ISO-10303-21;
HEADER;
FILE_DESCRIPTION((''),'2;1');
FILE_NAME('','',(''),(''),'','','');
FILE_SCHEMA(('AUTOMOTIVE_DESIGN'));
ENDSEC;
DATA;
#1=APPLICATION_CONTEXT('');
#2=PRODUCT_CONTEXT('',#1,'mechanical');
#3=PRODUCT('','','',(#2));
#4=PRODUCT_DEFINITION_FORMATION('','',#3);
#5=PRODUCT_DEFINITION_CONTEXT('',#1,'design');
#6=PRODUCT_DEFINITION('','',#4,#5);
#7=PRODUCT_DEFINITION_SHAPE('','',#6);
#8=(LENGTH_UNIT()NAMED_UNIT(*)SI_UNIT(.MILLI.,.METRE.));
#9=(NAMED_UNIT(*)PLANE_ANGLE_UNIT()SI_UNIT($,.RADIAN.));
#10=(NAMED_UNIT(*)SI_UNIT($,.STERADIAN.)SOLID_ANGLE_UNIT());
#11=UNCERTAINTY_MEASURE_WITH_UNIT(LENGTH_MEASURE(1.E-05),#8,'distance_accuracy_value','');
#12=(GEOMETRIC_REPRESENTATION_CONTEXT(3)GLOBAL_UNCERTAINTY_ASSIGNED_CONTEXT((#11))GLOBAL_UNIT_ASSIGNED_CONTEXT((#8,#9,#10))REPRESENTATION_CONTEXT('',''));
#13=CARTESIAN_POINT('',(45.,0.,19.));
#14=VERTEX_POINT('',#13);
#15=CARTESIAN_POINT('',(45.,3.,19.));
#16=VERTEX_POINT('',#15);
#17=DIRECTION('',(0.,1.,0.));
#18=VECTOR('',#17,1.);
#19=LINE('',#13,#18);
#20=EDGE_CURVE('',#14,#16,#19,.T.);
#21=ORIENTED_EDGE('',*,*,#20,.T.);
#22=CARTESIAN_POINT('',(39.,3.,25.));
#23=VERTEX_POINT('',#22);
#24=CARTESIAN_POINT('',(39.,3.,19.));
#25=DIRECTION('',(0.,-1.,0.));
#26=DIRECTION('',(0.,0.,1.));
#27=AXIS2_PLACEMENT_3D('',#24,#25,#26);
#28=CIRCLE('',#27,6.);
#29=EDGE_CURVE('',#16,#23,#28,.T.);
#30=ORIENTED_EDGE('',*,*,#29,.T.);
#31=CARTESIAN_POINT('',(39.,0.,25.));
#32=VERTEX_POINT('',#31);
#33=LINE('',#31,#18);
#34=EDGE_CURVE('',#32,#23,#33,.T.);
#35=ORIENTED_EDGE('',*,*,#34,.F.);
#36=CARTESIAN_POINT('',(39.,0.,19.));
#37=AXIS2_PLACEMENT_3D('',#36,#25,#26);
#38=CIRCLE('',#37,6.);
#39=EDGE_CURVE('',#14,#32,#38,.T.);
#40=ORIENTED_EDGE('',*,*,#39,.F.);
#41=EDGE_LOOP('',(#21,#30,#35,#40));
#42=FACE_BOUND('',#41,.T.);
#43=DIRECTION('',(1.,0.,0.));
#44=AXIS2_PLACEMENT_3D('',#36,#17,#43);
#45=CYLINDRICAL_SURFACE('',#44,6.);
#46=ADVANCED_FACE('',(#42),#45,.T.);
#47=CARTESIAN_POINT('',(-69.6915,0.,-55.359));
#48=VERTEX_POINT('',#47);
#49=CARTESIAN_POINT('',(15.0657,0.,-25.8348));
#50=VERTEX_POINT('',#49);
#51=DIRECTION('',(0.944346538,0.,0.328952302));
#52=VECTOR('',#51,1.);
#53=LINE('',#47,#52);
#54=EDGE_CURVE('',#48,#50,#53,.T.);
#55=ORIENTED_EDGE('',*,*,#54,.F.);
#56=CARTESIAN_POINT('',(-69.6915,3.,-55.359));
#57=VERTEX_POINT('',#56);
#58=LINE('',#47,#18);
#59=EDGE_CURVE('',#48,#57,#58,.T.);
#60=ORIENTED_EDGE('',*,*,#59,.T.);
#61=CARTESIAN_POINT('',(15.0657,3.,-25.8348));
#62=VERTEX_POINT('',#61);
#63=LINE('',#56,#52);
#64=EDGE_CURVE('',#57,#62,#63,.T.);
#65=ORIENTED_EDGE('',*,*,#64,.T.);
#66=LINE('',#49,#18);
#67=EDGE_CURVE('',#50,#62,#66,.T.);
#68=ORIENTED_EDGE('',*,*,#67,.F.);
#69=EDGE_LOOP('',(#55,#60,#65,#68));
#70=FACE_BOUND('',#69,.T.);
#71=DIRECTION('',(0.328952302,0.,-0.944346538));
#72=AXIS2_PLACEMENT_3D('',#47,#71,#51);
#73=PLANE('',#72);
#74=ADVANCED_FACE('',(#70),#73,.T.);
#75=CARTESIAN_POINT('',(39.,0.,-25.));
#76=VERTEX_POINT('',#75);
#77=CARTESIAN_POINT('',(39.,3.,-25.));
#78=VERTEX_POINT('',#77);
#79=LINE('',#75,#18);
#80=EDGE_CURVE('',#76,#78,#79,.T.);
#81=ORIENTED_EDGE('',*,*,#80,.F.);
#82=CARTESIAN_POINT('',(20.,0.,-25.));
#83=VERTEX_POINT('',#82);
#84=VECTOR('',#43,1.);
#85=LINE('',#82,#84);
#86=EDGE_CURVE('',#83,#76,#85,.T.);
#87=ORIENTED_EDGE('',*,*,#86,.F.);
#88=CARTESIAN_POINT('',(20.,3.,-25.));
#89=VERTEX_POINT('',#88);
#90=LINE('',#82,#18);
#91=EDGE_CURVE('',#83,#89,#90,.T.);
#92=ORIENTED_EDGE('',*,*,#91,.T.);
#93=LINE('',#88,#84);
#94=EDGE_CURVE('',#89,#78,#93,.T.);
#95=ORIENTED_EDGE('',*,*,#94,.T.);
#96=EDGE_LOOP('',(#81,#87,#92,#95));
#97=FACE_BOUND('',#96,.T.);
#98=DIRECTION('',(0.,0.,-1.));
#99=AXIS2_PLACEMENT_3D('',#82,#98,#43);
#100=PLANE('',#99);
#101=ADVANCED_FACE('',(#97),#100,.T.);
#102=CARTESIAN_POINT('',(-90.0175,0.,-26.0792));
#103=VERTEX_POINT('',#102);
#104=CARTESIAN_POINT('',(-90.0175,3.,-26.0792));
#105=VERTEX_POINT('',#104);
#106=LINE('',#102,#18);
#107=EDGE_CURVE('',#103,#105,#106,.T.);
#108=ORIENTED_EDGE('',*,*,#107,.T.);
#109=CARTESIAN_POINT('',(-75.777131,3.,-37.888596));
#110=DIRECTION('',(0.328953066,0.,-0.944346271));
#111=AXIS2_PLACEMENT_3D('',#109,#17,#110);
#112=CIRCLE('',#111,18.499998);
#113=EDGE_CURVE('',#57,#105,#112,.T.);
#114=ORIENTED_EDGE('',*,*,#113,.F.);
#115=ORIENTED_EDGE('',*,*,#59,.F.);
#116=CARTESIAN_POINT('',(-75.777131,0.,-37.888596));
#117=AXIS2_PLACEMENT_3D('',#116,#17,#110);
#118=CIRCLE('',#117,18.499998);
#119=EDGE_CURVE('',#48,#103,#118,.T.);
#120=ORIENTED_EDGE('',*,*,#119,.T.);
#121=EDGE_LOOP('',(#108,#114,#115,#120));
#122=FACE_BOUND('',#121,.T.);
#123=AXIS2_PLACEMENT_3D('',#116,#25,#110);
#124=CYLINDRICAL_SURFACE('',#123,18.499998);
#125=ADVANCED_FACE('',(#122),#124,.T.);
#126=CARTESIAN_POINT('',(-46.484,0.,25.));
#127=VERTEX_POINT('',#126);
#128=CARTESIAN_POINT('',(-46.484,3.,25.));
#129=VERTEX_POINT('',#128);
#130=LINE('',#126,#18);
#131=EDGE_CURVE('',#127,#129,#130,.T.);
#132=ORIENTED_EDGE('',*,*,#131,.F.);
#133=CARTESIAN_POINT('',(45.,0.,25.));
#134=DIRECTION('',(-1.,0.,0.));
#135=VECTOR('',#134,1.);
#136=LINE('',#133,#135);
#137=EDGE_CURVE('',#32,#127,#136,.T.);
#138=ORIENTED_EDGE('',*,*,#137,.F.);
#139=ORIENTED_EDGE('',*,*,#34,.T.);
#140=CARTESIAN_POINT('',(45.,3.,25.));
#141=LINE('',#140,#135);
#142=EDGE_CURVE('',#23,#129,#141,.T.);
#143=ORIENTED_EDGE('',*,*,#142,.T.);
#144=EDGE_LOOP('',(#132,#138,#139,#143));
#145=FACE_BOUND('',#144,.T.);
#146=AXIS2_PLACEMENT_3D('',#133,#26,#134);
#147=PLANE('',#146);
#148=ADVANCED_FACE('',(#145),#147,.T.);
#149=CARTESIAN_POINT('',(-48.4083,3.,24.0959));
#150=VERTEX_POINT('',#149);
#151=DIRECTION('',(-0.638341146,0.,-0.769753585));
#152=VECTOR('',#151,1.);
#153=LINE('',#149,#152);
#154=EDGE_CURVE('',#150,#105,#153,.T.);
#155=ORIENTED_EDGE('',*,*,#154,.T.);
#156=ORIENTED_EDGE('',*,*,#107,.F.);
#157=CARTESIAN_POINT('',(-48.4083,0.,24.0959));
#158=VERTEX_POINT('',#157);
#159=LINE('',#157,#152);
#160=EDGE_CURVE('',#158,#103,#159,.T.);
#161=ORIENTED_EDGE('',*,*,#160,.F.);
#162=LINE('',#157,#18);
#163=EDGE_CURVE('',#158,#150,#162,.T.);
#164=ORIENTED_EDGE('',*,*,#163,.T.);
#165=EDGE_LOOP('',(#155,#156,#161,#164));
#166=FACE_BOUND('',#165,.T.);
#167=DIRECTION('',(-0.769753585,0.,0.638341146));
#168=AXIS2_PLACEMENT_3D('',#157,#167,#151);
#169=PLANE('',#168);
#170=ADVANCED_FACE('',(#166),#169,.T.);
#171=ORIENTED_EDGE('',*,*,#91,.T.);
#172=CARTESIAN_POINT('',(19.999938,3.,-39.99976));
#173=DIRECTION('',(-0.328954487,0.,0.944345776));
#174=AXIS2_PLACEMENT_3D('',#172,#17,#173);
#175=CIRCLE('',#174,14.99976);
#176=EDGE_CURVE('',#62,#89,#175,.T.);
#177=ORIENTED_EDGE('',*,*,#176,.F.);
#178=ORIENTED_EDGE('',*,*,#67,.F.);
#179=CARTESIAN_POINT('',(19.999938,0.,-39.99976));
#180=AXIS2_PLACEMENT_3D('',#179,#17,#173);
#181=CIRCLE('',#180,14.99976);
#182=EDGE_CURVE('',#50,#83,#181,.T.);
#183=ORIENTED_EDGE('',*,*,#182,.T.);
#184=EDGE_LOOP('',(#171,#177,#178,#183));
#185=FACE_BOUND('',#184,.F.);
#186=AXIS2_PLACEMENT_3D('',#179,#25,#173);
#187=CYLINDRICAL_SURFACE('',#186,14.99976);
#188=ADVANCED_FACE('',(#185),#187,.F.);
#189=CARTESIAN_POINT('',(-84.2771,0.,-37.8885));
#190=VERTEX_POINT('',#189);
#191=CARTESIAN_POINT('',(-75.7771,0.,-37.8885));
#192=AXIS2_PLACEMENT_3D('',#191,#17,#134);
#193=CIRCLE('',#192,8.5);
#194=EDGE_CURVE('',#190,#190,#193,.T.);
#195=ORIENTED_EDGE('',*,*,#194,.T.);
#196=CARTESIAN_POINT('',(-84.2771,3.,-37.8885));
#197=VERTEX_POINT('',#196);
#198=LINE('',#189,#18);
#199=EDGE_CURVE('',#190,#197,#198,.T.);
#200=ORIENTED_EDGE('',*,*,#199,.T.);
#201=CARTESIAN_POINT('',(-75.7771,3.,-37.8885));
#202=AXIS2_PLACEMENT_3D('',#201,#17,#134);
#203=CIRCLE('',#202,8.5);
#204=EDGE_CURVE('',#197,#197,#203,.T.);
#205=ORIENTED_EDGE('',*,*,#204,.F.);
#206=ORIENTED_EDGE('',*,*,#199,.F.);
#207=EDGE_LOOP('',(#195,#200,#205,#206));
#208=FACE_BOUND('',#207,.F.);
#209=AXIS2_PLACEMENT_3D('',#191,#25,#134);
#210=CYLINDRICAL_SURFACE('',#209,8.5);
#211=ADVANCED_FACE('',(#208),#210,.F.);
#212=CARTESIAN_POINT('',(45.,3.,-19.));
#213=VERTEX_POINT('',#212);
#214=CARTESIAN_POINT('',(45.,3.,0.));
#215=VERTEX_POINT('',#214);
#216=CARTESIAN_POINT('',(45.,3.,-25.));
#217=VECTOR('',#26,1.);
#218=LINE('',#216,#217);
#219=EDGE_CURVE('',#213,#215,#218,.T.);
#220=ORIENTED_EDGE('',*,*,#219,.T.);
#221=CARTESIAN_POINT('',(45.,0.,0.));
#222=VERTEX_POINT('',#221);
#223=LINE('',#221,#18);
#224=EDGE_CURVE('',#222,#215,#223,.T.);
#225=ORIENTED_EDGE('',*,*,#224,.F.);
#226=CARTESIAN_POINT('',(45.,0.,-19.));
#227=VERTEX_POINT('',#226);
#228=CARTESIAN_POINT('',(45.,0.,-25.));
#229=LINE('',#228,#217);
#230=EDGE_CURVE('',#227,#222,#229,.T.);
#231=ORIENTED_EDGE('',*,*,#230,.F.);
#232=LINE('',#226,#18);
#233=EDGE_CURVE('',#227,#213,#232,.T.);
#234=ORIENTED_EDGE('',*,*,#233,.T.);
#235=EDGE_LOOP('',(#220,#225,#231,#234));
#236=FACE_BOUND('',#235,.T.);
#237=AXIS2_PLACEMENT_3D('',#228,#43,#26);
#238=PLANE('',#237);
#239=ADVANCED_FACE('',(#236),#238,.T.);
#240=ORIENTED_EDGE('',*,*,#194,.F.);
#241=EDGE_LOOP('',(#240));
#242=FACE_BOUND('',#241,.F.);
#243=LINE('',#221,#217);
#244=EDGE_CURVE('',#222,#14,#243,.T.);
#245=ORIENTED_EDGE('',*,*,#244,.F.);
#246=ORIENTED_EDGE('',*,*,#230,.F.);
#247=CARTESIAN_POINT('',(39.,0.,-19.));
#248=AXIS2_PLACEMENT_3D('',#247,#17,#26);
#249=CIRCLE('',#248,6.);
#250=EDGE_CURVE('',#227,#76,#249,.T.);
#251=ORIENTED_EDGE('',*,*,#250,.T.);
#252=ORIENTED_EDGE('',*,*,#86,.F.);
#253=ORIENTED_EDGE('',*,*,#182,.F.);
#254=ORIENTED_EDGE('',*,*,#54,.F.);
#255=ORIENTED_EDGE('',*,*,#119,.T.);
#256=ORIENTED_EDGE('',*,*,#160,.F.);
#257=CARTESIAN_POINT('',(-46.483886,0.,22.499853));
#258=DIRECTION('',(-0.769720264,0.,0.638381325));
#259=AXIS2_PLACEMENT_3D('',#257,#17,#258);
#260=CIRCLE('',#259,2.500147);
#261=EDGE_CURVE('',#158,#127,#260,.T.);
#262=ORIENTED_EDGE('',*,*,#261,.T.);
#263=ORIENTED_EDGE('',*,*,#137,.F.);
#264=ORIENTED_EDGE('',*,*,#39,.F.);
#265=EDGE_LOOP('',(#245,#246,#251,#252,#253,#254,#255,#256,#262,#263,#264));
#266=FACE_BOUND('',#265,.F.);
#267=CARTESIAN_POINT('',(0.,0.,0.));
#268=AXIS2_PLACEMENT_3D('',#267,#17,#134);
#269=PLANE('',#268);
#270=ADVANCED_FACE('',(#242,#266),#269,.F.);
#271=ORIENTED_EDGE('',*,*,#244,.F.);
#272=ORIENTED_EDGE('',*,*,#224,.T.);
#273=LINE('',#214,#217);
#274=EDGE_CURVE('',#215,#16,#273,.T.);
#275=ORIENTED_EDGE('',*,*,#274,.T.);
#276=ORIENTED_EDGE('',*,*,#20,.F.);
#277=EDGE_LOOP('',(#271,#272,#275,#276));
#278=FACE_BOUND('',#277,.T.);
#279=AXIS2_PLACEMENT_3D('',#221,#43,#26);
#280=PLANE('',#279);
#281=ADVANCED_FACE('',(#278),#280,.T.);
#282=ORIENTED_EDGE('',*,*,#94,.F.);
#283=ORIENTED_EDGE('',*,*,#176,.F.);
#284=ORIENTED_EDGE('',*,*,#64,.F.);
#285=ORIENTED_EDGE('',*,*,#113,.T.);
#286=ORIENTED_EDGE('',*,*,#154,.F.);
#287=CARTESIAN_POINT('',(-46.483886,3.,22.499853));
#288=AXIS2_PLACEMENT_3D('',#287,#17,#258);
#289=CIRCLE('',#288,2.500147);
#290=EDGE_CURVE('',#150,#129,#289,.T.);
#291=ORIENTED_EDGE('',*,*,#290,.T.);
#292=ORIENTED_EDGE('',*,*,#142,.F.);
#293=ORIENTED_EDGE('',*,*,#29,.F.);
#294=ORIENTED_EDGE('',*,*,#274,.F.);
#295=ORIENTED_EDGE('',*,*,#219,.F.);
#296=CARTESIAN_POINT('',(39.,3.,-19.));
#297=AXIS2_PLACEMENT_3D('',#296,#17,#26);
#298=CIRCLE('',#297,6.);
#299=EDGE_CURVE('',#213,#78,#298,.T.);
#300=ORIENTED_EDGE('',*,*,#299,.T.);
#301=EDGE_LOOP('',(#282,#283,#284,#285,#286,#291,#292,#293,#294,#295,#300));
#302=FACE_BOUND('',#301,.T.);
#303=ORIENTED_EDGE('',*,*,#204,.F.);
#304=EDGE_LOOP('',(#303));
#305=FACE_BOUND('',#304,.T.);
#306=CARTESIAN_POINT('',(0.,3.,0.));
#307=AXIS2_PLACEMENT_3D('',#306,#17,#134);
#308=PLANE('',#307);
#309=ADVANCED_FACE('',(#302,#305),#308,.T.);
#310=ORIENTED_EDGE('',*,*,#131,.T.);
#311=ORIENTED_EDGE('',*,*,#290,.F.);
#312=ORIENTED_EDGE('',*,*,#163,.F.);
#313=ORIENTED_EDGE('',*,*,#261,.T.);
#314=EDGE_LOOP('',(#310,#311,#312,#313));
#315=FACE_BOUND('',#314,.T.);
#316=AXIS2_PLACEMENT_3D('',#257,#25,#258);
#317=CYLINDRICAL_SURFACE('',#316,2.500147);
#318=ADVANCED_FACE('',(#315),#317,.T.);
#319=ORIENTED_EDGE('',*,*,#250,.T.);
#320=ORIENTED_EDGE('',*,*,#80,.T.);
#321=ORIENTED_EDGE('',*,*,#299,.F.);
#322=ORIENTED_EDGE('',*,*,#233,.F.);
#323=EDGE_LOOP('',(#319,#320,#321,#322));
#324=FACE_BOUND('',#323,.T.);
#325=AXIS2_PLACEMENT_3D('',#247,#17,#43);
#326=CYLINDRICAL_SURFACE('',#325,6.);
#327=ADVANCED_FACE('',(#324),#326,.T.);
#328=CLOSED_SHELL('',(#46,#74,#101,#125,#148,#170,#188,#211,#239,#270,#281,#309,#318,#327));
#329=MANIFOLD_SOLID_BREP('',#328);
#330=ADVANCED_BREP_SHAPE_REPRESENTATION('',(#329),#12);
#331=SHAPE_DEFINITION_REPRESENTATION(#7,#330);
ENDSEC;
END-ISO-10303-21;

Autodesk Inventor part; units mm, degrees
ref_plane "YZ Plane" through (0, 0, 0) normal (1, 0, 0) x (0, 1, 0)
ref_plane "XZ Plane" through (0, 0, 0) normal (0, 1, 0) x (-1, 0, 0)
ref_plane "XY Plane" through (0, 0, 0) normal (0, 0, 1) x (1, 0, 0)
sketch "Sketch1" plane through (0, 0, 0) normal (0, 1, 0) x (-1, 0, 0)
  line L0 (40, 20) -> (-40, 20) construction
  line L1 (-40, 20) -> (-40, -20) construction
  line L2 (-40, -20) -> (40, -20) construction
  line L3 (40, -20) -> (40, 20) construction
  line L4 (-40, 20) -> (40, -20) construction
  line L5 (0, 20) -> (0, -20) construction
  line L6 (-45, -25) -> (-45, 0)
  line L7 (-20, -25) -> (-45, -25)
  arc A0 (69.6915, -55.359) -> (90.0175, -26.0792) centre (75.7771, -37.8885) ccw
  circle A1 centre (75.7771, -37.8885) radius 8.5
  line L8 (69.6915, -55.359) -> (-15.0657, -25.8348)
  arc A2 (-15.0657, -25.8348) -> (-20, -25) centre (-20, -40) ccw
  arc A3 (90.0175, -26.0792) -> (69.6915, -55.359) centre (75.7771, -37.8885) ccw construction
  line L9 (-45, 0) -> (-45, 25)
  line L10 (-45, 25) -> (46.484, 25)
  line L11 (40, 0) -> (45, 0) construction
  line L12 (0, 20) -> (0, 25) construction
  line L13 (-40, 0) -> (-45, 0) construction
  line L14 (47.6585, 25) -> (48.4083, 24.0959) construction
  arc A4 (48.4083, 24.0959) -> (46.484, 25) centre (46.484, 22.5) ccw
  arc A5 (46.484, 25) -> (48.4083, 24.0959) centre (46.484, 22.5) ccw construction
  line L15 (48.4083, 24.0959) -> (90.0175, -26.0792)
  line L16 (46.484, 25) -> (47.6585, 25) construction
  point P0 (0, 0)
  point P1 (0, 0)
  point P2 (0, 0)
  dimension "d2" = 80
  dimension "d3" = 40
  dimension "d29" = 5
  dimension "d30" = 17
  dimension "d31" = 10
  dimension "d32" = 40
  dimension "d34" = 5
  dimension "d35" = 15
  dimension "d36" = 25
  dimension "d38" = 5
  dimension "d41" = 66.3579
extrude "Plate1" add sketch "Sketch1" along normal blind 3
fillet "Corner Round3" radius 6 2 edges at (45, 1.5, 25) (45, 1.5, -25)
equation "\"d34\" = d29"
equation "\"d6\" = Thickness"
equation "\"Thickness\" = 3"
properties part number "NDM-VOS Пятка под стойки" material "Stainless Steel"
